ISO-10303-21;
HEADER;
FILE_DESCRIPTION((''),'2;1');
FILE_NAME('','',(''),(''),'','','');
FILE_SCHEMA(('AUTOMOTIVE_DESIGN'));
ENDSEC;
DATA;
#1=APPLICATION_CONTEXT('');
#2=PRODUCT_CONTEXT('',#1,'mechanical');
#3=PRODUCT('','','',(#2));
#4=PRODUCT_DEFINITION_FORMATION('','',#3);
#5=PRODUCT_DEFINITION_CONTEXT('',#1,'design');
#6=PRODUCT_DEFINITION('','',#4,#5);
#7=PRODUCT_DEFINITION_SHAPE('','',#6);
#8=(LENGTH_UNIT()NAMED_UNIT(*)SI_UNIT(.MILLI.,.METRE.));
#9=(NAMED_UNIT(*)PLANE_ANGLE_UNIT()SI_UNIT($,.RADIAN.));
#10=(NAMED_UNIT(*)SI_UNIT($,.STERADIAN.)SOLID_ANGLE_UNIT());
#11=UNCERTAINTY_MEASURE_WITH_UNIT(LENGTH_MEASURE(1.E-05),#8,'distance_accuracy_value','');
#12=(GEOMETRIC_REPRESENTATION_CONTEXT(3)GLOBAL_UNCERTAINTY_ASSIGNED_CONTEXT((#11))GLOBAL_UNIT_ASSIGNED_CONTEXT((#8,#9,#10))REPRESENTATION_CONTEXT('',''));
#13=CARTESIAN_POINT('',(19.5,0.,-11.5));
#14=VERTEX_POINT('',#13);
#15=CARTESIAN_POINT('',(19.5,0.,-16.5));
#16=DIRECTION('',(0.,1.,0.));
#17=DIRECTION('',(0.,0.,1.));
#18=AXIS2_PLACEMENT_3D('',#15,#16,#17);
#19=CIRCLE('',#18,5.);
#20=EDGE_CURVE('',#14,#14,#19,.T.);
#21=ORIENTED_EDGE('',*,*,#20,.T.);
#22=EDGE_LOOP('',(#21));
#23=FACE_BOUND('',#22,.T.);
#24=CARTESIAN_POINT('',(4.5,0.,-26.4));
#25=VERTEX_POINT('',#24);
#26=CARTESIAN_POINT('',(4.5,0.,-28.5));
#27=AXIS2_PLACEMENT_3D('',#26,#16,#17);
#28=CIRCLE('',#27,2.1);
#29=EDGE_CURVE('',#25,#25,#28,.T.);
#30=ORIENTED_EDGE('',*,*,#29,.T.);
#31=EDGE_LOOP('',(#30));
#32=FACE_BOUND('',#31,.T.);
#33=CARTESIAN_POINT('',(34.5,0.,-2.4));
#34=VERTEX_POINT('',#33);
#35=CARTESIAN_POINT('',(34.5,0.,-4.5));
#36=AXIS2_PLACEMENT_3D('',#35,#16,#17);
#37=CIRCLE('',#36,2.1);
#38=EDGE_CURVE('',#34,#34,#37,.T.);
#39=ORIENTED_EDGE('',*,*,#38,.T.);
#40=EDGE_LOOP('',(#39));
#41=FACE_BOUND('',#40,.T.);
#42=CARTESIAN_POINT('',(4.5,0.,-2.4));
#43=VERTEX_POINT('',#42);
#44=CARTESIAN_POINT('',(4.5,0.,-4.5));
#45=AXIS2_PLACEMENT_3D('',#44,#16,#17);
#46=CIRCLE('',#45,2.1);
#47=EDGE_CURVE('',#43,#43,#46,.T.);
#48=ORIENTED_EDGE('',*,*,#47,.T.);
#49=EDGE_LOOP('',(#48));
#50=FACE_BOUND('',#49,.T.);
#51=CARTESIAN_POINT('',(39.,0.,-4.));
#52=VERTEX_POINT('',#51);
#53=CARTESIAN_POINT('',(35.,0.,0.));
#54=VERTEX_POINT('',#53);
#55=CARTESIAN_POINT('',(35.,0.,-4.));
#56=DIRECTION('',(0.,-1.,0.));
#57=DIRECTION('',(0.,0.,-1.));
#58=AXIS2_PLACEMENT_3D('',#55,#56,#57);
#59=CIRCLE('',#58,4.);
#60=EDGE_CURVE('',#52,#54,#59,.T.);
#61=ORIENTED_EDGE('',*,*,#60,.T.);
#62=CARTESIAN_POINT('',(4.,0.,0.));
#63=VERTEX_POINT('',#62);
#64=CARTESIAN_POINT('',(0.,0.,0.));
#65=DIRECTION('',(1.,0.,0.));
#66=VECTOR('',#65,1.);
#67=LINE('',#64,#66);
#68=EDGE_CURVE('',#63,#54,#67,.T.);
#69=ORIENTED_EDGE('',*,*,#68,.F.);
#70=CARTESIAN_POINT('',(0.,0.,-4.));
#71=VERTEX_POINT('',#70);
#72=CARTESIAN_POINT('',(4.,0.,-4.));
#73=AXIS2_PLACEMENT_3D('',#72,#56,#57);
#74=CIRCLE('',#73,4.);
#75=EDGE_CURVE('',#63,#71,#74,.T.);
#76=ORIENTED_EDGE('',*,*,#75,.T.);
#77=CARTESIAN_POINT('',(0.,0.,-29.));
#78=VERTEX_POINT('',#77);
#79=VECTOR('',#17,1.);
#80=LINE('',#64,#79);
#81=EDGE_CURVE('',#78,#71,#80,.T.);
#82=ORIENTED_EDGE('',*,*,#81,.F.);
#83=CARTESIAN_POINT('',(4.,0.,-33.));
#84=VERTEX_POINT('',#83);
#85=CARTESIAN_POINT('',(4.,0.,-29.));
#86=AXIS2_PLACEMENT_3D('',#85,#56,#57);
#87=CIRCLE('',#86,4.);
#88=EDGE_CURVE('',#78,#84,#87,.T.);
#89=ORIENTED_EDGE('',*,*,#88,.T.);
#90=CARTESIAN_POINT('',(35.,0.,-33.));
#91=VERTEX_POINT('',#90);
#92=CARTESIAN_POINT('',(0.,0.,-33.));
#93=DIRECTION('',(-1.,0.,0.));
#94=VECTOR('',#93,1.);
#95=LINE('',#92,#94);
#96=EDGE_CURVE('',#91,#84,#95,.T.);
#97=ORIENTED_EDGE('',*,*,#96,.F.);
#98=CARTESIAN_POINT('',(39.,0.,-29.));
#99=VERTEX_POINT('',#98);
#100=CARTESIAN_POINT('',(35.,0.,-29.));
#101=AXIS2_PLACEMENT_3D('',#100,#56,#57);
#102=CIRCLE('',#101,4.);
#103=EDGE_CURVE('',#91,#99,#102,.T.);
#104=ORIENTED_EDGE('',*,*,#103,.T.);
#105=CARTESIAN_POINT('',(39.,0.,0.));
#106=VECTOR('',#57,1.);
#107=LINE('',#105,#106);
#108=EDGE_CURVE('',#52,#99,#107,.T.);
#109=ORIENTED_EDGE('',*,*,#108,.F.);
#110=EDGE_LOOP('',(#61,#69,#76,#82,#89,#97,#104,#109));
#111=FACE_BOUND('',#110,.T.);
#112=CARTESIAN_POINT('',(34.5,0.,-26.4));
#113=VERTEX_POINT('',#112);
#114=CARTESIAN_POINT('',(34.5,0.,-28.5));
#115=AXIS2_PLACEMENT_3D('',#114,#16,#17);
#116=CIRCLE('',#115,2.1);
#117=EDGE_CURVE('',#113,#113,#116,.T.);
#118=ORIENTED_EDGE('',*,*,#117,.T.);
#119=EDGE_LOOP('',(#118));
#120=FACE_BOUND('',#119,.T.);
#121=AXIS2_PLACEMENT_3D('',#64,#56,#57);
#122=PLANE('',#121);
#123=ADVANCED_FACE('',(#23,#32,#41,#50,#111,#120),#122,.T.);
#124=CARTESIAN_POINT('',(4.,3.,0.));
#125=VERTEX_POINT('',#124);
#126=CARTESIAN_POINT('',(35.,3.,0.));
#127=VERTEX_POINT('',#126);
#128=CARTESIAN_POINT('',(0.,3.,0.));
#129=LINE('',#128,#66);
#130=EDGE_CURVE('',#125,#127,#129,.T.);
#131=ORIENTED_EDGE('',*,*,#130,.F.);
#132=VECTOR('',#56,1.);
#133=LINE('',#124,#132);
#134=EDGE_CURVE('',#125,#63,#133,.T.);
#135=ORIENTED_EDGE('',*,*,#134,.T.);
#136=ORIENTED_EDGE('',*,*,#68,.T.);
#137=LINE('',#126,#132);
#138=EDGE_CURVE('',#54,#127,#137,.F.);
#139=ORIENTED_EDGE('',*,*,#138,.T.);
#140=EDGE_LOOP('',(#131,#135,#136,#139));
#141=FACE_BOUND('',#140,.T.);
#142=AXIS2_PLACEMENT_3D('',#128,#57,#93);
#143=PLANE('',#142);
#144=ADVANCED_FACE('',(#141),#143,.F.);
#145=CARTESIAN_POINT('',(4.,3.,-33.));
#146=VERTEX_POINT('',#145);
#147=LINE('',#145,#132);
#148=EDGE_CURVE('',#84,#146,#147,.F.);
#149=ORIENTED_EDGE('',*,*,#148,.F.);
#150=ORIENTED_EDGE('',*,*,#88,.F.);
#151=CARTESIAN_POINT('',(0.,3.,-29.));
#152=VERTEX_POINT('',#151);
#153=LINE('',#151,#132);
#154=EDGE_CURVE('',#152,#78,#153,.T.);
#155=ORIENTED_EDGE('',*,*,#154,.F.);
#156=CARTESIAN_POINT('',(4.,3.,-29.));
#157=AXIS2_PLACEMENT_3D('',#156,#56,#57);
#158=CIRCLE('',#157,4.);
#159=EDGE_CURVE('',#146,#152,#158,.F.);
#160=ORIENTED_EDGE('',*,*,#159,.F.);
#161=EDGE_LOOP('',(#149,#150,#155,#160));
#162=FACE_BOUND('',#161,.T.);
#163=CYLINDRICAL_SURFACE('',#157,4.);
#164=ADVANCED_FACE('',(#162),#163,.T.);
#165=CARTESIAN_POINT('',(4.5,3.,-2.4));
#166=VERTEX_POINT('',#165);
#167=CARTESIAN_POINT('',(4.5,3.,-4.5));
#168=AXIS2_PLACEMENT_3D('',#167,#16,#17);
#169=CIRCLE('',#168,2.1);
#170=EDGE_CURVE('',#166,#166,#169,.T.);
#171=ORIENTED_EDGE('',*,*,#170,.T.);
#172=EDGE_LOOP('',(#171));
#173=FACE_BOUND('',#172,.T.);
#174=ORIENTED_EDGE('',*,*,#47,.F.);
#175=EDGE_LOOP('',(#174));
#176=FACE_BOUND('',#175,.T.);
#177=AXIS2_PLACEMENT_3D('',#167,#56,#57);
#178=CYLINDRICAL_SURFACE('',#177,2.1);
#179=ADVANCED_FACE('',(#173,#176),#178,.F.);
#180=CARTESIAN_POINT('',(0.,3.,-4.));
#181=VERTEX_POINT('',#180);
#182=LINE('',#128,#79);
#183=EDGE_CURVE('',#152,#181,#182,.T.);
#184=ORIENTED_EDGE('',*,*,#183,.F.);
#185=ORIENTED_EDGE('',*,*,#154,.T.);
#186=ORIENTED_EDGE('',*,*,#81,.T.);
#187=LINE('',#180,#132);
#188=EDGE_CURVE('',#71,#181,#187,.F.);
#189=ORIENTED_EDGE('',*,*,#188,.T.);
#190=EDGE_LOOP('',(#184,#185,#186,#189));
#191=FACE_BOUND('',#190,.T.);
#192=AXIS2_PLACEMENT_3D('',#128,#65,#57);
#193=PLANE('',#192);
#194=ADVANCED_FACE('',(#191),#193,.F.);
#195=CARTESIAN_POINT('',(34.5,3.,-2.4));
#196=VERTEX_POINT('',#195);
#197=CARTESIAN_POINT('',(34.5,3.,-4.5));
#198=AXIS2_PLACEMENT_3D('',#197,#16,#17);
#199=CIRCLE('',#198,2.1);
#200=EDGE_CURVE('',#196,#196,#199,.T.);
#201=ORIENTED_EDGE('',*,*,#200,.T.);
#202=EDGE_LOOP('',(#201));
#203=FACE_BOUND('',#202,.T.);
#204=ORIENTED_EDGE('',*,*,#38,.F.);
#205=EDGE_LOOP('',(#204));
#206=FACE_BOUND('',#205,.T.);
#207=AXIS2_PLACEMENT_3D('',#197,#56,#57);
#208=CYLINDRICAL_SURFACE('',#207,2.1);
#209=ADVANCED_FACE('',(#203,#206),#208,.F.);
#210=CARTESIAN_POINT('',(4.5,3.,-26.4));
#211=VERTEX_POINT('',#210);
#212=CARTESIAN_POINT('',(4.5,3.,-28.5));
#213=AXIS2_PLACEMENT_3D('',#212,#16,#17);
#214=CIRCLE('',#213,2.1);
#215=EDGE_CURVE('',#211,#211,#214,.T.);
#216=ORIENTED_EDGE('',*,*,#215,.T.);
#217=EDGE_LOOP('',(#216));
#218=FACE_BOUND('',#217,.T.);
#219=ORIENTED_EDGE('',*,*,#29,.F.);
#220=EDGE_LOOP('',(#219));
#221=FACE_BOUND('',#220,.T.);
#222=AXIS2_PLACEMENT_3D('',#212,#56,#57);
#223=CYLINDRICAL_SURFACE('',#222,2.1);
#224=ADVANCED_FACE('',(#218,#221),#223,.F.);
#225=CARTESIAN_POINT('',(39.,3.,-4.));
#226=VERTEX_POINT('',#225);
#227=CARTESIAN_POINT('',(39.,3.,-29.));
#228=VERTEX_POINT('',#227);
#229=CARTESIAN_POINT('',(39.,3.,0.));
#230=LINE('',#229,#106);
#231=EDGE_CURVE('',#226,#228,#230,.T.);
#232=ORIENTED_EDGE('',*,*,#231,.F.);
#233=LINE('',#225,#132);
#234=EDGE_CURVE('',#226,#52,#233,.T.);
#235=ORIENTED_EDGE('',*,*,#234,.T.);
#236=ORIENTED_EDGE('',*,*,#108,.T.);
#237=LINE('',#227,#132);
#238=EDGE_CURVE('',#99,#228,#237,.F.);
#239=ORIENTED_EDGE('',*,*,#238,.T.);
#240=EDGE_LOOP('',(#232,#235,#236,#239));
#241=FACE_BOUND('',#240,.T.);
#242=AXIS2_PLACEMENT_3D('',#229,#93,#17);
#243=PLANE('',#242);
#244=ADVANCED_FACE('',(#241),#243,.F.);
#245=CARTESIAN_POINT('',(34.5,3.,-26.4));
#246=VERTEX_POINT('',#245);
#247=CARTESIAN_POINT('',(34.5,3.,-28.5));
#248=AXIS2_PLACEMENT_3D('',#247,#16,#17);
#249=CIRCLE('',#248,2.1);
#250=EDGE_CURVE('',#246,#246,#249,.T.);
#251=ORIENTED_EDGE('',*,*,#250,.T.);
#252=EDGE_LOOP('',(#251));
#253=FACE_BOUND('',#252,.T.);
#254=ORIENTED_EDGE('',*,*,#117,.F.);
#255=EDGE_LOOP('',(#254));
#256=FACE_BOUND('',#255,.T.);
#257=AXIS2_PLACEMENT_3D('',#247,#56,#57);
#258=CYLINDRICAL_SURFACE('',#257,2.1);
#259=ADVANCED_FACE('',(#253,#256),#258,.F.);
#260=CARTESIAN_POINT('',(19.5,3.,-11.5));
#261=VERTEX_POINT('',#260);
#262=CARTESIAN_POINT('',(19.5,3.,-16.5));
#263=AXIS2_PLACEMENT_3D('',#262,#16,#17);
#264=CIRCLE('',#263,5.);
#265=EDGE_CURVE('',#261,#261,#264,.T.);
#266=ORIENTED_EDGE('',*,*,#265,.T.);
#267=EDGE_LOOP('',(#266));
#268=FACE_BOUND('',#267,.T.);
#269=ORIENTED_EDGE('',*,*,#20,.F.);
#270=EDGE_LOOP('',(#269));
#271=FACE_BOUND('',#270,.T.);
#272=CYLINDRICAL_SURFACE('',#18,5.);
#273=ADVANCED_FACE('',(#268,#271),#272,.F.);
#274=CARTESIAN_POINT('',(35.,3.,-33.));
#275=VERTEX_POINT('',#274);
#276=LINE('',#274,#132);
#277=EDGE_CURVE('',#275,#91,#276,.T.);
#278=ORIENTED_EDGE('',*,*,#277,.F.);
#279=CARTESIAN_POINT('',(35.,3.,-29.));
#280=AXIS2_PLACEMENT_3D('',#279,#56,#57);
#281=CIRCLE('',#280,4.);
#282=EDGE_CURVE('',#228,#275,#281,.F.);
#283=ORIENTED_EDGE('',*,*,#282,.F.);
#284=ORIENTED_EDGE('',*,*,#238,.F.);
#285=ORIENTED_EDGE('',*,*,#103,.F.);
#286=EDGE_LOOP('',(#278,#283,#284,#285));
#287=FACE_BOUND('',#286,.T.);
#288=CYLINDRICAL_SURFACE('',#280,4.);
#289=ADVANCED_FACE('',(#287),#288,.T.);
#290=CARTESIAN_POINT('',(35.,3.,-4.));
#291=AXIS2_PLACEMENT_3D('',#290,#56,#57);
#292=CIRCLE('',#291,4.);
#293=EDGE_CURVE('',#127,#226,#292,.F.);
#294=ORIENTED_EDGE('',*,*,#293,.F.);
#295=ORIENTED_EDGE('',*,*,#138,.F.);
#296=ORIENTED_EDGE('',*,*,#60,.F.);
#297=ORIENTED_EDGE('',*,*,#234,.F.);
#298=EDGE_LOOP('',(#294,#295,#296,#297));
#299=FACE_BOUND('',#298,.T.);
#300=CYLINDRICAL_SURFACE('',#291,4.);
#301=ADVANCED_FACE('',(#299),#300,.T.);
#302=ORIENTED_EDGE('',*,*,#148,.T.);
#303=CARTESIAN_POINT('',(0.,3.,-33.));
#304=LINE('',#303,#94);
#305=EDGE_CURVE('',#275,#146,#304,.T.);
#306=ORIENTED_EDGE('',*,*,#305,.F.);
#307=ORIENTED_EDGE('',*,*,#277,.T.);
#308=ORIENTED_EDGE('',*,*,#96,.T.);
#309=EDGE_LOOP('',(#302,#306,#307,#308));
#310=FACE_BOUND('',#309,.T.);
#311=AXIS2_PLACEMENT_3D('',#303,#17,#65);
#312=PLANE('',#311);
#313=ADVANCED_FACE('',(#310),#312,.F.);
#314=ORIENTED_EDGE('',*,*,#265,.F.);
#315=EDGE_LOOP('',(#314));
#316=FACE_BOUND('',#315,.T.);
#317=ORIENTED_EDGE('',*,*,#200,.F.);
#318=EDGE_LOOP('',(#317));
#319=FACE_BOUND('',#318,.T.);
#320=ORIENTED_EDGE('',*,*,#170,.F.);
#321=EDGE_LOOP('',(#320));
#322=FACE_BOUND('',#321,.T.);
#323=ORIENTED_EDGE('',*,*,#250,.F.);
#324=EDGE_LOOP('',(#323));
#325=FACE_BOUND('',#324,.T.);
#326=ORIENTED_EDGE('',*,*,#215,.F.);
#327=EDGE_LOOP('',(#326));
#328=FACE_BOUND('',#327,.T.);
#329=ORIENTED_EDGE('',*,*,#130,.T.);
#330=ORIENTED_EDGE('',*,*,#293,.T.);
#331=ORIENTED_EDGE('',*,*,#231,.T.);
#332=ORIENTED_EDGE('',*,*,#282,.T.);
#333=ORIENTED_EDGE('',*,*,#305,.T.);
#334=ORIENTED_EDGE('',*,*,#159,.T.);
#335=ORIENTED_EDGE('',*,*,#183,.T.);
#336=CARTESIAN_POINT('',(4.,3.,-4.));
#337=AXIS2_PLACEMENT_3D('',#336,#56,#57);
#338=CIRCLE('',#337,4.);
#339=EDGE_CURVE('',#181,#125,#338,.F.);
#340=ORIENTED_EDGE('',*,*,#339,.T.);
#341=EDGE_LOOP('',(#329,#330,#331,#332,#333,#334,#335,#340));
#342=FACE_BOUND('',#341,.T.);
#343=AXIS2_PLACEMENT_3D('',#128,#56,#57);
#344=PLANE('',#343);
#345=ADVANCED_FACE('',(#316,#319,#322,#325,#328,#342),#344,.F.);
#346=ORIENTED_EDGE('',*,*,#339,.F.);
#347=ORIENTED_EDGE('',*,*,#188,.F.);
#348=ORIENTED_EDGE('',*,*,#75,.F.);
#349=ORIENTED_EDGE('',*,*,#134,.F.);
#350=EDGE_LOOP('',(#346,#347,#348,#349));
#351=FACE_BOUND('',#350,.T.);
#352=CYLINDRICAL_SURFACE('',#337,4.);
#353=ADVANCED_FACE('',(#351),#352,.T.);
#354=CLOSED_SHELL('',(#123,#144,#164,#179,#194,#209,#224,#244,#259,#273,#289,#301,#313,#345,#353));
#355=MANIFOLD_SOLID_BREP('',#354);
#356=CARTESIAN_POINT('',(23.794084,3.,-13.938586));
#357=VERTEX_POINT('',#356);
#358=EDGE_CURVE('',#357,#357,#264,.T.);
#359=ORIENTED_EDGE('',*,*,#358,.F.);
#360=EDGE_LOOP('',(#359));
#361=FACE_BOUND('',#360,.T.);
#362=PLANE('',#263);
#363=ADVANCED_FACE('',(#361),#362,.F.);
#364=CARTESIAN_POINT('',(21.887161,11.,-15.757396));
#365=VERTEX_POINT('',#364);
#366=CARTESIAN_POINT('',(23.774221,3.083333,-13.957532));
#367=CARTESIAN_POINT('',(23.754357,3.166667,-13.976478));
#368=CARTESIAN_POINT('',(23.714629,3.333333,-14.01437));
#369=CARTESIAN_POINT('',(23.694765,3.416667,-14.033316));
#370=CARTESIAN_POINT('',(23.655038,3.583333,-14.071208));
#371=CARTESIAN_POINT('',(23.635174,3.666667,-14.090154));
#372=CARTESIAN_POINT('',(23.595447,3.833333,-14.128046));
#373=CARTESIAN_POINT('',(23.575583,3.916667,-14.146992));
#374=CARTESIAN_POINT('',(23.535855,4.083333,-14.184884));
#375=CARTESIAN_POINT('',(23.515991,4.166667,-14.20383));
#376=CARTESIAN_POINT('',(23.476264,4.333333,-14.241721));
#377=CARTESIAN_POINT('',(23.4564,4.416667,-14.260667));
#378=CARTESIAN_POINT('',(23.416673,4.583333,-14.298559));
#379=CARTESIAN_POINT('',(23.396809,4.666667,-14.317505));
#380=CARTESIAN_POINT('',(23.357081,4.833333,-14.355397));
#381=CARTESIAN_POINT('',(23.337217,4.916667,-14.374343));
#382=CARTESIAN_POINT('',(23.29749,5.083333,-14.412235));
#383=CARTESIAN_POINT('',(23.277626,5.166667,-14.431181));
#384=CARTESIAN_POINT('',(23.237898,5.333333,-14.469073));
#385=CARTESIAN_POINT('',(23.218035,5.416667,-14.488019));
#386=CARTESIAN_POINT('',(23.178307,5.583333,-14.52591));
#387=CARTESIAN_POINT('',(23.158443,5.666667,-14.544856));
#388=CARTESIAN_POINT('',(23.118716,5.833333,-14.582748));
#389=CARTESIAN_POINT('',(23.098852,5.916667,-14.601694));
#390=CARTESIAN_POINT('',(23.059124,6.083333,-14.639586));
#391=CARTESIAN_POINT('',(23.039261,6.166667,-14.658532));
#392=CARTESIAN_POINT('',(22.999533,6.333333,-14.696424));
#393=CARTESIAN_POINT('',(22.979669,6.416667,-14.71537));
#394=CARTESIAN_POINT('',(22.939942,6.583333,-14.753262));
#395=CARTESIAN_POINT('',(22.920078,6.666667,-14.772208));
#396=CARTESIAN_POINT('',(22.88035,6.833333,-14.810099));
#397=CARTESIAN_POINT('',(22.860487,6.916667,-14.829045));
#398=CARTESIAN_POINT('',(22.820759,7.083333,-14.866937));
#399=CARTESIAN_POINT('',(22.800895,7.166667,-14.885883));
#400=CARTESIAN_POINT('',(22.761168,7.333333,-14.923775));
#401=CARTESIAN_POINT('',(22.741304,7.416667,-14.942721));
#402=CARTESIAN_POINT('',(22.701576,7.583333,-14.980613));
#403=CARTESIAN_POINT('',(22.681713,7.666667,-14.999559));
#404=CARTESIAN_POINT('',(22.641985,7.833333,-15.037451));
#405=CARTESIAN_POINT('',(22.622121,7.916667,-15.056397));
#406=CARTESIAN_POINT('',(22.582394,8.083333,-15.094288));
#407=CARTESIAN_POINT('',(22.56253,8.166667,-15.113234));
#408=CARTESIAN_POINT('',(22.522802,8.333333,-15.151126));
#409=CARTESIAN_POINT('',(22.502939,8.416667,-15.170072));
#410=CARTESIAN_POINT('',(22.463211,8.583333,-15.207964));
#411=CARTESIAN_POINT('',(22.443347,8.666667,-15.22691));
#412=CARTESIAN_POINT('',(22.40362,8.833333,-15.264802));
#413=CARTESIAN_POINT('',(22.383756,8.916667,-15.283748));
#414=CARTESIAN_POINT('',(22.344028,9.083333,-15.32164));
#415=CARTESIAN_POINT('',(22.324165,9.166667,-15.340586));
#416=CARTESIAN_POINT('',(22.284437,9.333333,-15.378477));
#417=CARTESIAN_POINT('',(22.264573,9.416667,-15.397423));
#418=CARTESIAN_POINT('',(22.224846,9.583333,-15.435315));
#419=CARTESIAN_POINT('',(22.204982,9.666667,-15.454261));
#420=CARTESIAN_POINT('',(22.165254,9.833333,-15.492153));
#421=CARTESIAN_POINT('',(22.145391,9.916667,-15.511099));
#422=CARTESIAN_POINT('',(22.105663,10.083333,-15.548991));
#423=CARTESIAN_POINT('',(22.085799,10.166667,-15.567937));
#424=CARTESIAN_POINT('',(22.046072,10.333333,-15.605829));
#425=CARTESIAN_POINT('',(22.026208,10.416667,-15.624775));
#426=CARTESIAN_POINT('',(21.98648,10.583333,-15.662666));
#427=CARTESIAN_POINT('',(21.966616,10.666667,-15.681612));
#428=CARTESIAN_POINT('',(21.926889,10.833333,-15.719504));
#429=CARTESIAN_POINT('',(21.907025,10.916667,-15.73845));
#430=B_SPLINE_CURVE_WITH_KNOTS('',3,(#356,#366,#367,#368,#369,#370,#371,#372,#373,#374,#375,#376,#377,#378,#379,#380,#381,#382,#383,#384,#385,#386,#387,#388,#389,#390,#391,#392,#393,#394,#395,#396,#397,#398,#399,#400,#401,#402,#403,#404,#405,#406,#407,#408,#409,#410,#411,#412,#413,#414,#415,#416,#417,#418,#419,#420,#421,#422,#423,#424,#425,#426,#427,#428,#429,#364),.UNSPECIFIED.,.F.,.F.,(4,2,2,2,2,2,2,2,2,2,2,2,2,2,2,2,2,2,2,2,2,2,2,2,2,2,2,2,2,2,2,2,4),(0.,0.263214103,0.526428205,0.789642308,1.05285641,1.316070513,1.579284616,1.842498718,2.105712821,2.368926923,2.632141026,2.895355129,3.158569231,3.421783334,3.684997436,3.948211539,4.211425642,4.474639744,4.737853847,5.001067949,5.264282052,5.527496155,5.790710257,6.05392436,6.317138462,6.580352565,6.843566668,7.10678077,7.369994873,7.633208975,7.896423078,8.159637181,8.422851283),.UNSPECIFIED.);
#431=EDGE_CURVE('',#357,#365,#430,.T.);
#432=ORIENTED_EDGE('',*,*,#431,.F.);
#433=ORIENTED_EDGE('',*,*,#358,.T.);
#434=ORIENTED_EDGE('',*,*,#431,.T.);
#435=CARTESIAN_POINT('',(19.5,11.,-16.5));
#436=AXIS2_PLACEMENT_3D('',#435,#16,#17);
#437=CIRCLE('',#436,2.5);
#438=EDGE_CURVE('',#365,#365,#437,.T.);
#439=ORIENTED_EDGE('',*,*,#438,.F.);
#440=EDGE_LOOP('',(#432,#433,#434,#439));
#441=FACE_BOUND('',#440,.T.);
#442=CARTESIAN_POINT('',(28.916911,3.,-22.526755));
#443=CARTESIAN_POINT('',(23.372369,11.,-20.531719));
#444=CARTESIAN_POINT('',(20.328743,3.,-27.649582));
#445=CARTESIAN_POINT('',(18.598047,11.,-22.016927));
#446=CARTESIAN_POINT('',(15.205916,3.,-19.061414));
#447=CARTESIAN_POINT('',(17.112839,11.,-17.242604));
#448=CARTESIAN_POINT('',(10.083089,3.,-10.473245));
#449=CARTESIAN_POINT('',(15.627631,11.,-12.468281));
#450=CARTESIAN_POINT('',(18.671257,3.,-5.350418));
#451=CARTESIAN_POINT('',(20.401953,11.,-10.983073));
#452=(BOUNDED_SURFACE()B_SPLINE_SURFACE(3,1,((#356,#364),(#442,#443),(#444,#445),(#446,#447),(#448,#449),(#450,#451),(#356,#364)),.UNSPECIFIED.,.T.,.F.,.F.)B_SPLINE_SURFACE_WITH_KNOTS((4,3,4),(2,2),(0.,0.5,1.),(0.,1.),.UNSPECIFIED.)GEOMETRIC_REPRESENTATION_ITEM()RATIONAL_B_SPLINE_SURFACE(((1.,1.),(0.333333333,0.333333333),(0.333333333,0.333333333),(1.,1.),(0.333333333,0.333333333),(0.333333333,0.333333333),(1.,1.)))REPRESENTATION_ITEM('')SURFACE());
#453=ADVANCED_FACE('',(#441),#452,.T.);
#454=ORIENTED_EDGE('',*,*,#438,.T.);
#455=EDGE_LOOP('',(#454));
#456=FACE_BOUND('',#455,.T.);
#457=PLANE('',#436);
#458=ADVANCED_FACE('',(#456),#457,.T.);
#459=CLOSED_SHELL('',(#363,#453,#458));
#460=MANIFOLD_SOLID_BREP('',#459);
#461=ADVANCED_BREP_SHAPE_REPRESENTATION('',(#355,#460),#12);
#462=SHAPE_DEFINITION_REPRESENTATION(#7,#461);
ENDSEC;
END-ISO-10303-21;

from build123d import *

# Parameters (mm, degrees)
SKETCH_1_W          = 39
SKETCH_1_H          = 33
SKETCH_1_R          = 2.1
EXTRUDE_1_DEPTH     = 3
FILLET_1_R          = 4
SKETCH_2_R          = 5
CUT_EXTRUDE_1_DEPTH = 3


with BuildPart() as part:
    # 草图1 → 凸台-拉伸1 (new body)
    with BuildSketch(Plane(origin=(0, 0, 0), x_dir=(1, 0, 0), z_dir=(0, 1, 0))):
        with Locations((19.5, 16.5)):
            Rectangle(SKETCH_1_W, SKETCH_1_H)
        with Locations(Location((4.5, 28.5, 0), (0, 0, 270))):
            Circle(SKETCH_1_R, mode=Mode.SUBTRACT)
        with Locations(Location((34.5, 28.5, 0), (0, 0, 270))):
            Circle(SKETCH_1_R, mode=Mode.SUBTRACT)
        with Locations(Location((34.5, 4.5, 0), (0, 0, 270))):
            Circle(SKETCH_1_R, mode=Mode.SUBTRACT)
        with Locations(Location((4.5, 4.5, 0), (0, 0, 270))):
            Circle(SKETCH_1_R, mode=Mode.SUBTRACT)
    extrude(amount=EXTRUDE_1_DEPTH)

    # 圆角1
    fillet_1_edges = [part.edges().sort_by_distance(p)[0] for p in [
        (0, 1.5, -33),
        (39, 1.5, -33),
        (39, 1.5, 0),
        (0, 1.5, 0),
    ]]
    fillet(fillet_1_edges, radius=FILLET_1_R)

    # 草图2 → 切除-拉伸1 (cut)
    with BuildSketch(Plane(origin=(0, 3, 0), x_dir=(1, 0, 0), z_dir=(0, 1, 0))):
        with Locations(Location((19.5, 16.5, 0), (0, 0, 270))):
            Circle(SKETCH_2_R)
    extrude(amount=-CUT_EXTRUDE_1_DEPTH, mode=Mode.SUBTRACT)


with BuildPart() as body_2:
    # 放样1: read off the stored shape, not the designer's step
    # 放样1: loft between two sections, ruled curve by curve
    loft_1_from = [
        Edge.make_bspline([(23.79408437, 3, -13.938586441), (28.916911488, 3, -22.526755182), (20.328742747, 3, -27.6495823), (15.20591563, 3, -19.061413559), (10.083088512, 3, -10.473244818), (18.671257253, 3, -5.3504177), (23.79408437, 3, -13.938586441)], [0, 0, 0, 0, 0.5, 0.5, 0.5, 1, 1, 1, 1], 3, [1, 0.333333333, 0.333333333, 1, 0.333333333, 0.333333333, 1]),
    ]
    loft_1_to = [
        Edge.make_bspline([(21.887161362, 11, -15.757396046), (23.37236927, 11, -20.53171877), (18.598046546, 11, -22.016926678), (17.112838638, 11, -17.242603954), (15.62763073, 11, -12.46828123), (20.401953454, 11, -10.983073322), (21.887161362, 11, -15.757396046)], [0, 0, 0, 0, 0.5, 0.5, 0.5, 1, 1, 1, 1], 3, [1, 0.333333333, 0.333333333, 1, 0.333333333, 0.333333333, 1]),
    ]
    loft_1 = Solid(Shell([*[Face.make_surface_from_curves(loft_1_from[k], loft_1_to[k]) for k in range(1)], Face(Wire(loft_1_from)), Face(Wire(loft_1_to))]))
    add(loft_1)


solid = Compound([part.part, body_2.part])
